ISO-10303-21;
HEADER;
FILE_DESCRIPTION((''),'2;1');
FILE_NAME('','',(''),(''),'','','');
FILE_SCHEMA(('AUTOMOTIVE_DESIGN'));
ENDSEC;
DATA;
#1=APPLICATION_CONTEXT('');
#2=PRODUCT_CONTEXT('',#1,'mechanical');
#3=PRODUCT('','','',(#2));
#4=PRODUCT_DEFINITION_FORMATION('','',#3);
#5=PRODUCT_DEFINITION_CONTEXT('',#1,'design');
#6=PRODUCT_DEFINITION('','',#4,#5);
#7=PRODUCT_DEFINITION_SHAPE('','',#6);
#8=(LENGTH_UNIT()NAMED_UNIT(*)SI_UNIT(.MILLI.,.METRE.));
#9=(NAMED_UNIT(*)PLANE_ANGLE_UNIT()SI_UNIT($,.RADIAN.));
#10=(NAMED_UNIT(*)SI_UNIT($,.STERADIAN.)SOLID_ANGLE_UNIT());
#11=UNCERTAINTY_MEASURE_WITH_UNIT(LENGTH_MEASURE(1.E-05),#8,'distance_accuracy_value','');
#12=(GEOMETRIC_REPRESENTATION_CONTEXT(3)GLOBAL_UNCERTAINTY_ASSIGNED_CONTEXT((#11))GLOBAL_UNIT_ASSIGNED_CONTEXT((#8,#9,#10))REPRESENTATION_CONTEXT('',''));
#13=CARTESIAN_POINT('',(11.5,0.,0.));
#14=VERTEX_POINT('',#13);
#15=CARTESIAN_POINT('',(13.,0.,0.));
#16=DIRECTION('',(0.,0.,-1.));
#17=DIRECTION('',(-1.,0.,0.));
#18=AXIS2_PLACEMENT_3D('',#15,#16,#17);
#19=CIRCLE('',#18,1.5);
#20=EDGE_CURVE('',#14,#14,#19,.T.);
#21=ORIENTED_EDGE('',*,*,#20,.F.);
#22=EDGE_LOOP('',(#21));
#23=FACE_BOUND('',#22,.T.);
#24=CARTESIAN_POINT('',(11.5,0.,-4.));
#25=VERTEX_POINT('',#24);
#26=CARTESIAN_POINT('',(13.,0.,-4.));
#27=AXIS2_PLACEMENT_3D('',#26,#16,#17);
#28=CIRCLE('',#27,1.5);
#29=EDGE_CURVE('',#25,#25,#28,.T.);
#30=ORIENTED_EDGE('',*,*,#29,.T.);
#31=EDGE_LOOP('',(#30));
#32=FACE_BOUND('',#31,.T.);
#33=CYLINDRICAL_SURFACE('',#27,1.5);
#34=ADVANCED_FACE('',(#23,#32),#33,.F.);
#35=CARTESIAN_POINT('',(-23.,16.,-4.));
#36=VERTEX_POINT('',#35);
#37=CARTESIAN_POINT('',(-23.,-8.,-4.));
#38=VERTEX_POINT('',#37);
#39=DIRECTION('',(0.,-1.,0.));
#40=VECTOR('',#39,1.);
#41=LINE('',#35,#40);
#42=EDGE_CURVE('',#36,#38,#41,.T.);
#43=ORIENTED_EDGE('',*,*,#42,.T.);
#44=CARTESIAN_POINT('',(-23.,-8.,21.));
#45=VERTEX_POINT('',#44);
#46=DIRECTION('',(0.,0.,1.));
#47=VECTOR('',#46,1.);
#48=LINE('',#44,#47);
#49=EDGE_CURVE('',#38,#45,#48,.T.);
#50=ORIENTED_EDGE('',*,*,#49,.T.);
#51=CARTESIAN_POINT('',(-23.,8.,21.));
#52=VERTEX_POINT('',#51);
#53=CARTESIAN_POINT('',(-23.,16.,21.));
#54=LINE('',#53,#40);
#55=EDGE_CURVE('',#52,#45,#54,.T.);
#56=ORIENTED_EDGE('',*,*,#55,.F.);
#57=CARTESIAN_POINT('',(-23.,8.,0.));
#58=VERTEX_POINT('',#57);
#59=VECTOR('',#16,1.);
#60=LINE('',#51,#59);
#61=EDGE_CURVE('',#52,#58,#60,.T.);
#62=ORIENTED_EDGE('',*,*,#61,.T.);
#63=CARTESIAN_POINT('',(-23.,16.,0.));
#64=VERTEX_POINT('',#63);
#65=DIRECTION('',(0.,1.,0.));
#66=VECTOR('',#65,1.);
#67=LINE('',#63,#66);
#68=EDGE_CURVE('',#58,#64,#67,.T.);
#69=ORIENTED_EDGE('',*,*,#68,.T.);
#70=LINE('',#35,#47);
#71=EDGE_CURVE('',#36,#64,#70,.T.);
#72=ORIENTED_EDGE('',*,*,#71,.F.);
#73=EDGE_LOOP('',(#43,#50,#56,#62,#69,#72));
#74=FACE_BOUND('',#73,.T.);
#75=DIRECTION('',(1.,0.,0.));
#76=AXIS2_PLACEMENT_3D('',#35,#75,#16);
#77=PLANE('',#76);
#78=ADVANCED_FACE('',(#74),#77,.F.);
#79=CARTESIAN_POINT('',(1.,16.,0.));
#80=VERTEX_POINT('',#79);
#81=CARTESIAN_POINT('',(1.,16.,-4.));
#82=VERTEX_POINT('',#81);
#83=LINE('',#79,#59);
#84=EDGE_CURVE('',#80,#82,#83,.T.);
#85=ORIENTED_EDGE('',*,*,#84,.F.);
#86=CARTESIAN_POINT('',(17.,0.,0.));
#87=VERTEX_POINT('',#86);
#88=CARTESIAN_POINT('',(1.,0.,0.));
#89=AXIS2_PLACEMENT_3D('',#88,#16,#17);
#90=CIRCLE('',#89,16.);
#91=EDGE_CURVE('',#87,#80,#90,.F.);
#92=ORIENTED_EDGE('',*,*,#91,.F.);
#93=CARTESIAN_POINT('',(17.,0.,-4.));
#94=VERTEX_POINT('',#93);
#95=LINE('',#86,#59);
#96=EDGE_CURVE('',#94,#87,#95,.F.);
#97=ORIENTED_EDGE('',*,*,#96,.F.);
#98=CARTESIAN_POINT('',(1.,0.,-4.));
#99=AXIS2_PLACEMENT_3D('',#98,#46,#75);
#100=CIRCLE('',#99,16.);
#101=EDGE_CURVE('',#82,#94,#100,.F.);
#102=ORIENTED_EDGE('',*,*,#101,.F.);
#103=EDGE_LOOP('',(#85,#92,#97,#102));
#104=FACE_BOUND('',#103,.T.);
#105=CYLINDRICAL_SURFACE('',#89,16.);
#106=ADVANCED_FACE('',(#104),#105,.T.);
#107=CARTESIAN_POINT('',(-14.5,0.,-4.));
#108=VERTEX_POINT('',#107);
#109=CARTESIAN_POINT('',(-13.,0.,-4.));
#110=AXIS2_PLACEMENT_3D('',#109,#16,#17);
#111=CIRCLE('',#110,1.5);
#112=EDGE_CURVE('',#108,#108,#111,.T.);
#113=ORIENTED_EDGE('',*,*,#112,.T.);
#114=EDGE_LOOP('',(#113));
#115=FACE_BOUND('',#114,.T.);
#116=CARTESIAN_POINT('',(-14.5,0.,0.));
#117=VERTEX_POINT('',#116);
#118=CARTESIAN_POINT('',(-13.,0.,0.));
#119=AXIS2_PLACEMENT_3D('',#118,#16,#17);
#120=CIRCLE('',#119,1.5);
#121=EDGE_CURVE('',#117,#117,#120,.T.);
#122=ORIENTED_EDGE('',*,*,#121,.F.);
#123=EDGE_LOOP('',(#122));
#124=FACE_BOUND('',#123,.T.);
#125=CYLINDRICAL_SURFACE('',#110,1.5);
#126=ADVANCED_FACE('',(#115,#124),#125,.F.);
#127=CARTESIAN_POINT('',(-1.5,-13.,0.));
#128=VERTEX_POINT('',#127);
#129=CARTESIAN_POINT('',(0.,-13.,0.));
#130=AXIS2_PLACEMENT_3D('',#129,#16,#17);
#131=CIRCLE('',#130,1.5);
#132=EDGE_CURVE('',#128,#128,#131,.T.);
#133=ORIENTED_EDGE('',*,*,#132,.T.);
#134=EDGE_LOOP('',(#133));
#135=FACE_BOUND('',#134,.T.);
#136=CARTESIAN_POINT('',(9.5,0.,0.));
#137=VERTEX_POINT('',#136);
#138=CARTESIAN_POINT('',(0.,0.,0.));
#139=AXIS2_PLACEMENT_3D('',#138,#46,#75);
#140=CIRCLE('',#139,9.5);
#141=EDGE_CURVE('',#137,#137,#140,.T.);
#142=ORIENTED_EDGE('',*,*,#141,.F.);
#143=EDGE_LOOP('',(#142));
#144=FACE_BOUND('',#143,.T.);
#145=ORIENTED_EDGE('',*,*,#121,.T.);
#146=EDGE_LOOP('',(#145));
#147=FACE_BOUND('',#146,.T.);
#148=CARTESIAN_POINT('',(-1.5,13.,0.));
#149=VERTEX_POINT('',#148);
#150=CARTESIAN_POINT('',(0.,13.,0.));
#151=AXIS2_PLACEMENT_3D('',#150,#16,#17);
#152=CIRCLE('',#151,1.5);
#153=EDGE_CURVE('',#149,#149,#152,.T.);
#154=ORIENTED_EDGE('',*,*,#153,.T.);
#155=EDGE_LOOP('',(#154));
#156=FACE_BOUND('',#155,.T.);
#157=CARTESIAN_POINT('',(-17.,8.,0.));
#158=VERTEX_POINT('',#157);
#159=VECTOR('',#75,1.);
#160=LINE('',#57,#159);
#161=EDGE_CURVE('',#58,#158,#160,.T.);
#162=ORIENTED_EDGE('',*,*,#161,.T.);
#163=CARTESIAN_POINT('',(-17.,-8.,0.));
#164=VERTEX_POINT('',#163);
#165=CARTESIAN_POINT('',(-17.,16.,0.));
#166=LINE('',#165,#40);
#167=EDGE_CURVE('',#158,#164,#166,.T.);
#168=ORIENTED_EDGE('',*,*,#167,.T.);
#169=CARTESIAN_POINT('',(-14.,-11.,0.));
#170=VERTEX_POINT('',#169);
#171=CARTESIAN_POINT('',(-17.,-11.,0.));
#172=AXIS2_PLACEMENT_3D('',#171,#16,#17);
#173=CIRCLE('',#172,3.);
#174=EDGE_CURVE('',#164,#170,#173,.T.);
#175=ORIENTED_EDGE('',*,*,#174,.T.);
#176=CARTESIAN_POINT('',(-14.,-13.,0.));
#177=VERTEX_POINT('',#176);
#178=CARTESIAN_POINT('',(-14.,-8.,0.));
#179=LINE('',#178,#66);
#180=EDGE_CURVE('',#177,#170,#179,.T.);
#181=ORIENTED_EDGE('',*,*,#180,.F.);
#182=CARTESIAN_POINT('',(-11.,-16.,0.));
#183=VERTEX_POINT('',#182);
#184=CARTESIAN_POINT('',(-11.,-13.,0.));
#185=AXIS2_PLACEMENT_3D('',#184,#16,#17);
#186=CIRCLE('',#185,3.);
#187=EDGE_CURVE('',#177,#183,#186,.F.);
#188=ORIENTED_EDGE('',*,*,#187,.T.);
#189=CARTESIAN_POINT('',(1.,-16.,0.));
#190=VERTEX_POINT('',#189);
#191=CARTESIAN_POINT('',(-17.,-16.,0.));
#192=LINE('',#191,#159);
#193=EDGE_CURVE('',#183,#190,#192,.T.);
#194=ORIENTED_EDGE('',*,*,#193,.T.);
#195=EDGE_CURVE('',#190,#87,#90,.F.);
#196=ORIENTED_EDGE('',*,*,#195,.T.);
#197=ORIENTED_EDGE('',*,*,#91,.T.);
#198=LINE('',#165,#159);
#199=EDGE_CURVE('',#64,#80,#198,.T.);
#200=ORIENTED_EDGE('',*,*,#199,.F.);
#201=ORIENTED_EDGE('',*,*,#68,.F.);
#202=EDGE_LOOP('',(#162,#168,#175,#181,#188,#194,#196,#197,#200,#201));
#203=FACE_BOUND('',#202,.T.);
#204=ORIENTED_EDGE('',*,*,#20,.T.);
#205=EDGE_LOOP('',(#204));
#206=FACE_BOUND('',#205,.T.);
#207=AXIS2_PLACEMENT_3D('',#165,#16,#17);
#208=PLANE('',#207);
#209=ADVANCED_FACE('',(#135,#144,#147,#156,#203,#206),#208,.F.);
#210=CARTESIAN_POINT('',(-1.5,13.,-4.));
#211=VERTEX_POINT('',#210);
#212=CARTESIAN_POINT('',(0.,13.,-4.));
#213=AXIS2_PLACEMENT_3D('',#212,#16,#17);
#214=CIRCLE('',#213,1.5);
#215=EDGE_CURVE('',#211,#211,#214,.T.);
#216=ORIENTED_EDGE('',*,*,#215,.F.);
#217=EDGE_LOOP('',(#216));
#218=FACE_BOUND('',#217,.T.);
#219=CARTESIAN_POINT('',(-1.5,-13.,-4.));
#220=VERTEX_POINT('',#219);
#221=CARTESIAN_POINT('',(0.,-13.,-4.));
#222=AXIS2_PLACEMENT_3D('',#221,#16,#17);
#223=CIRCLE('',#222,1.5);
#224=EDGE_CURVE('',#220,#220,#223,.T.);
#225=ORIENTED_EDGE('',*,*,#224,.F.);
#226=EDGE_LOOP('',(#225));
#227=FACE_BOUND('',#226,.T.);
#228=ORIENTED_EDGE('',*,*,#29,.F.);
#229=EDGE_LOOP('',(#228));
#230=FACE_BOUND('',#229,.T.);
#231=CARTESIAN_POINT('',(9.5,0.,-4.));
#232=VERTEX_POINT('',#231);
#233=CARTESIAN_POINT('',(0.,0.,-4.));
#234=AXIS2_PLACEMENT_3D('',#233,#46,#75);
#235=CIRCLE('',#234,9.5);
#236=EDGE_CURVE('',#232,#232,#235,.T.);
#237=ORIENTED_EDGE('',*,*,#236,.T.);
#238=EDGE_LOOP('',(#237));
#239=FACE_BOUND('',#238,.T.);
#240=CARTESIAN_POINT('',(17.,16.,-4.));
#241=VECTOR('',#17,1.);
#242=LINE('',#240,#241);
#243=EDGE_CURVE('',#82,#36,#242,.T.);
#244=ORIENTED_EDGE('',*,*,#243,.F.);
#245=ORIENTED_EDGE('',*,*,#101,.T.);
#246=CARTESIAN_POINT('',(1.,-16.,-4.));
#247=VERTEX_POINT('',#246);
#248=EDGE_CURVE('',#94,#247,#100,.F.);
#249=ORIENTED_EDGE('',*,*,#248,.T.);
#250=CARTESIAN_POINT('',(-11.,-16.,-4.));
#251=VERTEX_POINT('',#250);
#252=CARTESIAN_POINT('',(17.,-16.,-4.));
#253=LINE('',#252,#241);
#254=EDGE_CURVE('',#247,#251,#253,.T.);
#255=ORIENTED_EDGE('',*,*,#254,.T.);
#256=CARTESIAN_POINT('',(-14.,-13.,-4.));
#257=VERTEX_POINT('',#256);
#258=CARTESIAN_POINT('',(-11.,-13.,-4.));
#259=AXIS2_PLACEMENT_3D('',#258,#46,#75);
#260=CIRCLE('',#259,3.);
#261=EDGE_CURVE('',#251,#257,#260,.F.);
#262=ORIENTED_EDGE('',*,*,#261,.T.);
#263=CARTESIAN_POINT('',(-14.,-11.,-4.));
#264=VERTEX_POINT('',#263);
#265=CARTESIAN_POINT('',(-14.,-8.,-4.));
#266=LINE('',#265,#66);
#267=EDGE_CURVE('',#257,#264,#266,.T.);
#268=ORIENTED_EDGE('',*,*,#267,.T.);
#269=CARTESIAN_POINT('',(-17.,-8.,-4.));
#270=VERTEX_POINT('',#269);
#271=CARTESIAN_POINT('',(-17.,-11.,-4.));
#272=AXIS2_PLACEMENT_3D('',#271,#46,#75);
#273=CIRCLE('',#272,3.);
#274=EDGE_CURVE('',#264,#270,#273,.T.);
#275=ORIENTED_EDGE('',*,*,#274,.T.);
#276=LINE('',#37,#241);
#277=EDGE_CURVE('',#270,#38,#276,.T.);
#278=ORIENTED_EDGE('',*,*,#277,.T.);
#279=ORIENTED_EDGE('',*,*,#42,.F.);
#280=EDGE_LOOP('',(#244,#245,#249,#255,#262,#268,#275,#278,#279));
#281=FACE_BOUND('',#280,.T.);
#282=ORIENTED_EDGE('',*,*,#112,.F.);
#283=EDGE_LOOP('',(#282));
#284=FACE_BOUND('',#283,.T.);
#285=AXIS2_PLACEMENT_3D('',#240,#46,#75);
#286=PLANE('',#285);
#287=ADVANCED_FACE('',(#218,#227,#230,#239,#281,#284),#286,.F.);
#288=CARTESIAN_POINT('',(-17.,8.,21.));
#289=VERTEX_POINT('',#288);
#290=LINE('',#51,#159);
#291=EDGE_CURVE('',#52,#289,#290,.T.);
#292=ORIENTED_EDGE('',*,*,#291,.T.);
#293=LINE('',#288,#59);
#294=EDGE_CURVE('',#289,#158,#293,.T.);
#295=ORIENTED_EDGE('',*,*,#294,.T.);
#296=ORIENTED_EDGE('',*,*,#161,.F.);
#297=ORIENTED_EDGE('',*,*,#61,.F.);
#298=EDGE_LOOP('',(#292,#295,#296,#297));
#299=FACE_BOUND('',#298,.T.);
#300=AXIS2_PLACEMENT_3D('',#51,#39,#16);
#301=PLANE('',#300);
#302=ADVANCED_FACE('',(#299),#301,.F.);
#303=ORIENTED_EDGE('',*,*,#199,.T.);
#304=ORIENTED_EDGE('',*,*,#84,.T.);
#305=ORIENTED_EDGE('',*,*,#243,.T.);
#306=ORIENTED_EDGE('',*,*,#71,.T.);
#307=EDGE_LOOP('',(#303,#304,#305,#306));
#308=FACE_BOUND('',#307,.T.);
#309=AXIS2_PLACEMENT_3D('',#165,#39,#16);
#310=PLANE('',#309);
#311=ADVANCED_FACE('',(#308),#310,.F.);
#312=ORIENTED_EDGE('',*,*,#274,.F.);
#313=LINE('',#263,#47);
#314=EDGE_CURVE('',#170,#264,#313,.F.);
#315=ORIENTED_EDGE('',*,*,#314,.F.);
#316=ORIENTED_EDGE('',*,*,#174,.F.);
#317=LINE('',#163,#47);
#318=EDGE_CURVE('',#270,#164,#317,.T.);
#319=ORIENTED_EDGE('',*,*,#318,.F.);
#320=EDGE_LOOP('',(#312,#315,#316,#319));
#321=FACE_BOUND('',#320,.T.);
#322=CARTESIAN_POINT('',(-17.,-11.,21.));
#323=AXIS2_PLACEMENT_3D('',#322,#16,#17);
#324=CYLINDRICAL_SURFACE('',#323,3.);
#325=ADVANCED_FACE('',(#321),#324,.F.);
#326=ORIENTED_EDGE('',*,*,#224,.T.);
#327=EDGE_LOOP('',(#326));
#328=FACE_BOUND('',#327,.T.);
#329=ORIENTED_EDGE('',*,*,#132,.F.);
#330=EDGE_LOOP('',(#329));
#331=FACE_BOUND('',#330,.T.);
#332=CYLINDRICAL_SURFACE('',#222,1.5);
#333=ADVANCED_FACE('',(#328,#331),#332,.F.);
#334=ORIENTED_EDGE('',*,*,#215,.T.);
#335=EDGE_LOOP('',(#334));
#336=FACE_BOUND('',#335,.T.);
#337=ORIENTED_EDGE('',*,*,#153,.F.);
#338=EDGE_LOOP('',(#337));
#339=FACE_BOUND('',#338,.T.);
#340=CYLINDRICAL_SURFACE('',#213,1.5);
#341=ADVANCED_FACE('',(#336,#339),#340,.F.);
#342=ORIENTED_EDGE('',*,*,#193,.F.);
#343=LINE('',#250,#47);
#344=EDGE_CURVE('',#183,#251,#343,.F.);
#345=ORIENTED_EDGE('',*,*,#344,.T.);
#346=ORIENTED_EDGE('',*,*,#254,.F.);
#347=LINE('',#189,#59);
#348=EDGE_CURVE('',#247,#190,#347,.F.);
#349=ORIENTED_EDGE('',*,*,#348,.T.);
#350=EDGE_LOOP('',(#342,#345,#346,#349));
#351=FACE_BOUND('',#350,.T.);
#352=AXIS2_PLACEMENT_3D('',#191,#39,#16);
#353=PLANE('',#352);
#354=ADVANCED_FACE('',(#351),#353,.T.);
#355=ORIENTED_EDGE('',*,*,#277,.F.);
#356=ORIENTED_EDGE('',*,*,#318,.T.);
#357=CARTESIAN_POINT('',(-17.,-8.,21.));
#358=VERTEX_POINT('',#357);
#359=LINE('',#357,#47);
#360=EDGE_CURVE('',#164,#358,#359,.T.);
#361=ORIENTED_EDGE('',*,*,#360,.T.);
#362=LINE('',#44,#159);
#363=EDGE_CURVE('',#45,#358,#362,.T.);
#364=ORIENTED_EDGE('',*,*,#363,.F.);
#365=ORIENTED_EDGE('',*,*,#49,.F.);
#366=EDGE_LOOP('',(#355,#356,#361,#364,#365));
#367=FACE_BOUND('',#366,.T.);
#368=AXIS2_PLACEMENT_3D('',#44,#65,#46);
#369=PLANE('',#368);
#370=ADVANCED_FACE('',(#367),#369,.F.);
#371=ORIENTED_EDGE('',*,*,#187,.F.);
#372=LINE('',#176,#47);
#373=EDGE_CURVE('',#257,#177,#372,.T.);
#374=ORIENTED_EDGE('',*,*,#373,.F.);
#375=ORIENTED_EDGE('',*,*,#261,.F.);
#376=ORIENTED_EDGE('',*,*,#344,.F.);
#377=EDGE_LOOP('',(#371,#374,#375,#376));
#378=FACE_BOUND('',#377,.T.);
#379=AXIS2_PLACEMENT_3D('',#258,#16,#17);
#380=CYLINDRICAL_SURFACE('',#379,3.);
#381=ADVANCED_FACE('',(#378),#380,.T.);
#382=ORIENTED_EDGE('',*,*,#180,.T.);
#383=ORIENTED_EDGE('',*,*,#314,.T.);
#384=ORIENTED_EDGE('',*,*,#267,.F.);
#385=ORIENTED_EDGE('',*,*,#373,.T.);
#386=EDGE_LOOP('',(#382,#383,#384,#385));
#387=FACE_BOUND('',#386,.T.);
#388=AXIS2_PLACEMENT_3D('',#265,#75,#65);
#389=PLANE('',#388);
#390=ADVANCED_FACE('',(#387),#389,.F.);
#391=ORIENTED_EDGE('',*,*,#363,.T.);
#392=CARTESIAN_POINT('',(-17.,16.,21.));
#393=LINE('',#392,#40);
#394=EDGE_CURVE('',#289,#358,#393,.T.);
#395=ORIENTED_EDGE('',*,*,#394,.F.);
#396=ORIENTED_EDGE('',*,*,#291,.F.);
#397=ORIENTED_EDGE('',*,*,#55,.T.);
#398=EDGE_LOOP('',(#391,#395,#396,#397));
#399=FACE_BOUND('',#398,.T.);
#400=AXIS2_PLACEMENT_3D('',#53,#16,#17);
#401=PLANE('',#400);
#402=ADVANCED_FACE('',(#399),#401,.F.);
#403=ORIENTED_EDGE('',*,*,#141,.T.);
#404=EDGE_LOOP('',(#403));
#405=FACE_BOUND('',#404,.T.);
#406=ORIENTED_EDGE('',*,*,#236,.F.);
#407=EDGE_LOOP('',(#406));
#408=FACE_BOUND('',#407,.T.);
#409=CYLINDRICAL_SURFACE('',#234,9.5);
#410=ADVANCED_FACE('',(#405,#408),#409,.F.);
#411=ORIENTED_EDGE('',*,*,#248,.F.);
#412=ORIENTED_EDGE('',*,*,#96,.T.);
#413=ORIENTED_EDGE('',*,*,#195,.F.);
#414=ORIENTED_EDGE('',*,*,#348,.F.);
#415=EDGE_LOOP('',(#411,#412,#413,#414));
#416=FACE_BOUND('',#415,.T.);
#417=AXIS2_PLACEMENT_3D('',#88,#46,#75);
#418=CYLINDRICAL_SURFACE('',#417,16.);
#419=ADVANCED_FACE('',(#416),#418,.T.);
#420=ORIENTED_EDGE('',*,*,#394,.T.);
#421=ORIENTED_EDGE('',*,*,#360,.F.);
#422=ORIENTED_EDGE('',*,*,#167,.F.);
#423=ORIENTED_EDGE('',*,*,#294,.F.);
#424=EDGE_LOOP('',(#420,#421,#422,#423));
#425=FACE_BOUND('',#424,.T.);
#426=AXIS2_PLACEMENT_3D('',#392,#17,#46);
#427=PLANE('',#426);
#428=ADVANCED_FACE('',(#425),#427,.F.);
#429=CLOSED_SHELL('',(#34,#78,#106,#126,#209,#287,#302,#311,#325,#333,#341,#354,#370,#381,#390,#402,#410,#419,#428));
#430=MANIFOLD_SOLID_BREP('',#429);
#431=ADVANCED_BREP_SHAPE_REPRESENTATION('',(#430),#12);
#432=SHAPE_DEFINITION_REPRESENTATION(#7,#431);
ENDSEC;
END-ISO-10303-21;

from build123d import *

# Parameters (mm, degrees)
BOSS_EXTRUDE1_DEPTH      = 16
SKETCH2_W                = 21
SKETCH2_H                = 8
CUT_EXTRUDE1_DEPTH       = 44.0464865
SKETCH3_R                = 9.5
CUT_EXTRUDE2_DEPTH       = 36.0142828
FILLET1_R                = 16
F_3_0_3_DIAMETER_HOLE1_D = 3
SKETCH6_W                = 9
SKETCH6_H                = 8
CUT_EXTRUDE3_DEPTH       = 36.0142828
FILLET2_R                = 3


with BuildPart() as part:
    # Sketch1 → Boss-Extrude1 (new, symmetric)
    with BuildSketch(Plane(origin=(0, 0, 0), x_dir=(1, 0, 0), z_dir=(0, 1, 0))):
        Polygon((-17, 0), (17, 0), (17, 4), (-23, 4), (-23, -21), (-17, -21), align=None)
    extrude(amount=BOSS_EXTRUDE1_DEPTH, both=True)

    # Sketch2 → Cut-Extrude1 (cut, through all)
    with BuildSketch(Plane(origin=(-17, 0, 0), x_dir=(0, 0, -1), z_dir=(1, 0, 0))):
        with Locations((-10.5, 12)):
            Rectangle(SKETCH2_W, SKETCH2_H)
        with Locations((-10.5, -12)):
            Rectangle(SKETCH2_W, SKETCH2_H)
    extrude(amount=-CUT_EXTRUDE1_DEPTH, mode=Mode.SUBTRACT)

    # Sketch3 → Cut-Extrude2 (cut, through all)
    with BuildSketch(Plane.XY):
        Circle(SKETCH3_R)
    extrude(amount=-CUT_EXTRUDE2_DEPTH, mode=Mode.SUBTRACT)

    # Fillet1
    fillet1_edges = [part.edges().sort_by_distance(p)[0] for p in [
        (17, -16, -2),
        (17, 16, -2),
    ]]
    fillet(fillet1_edges, radius=FILLET1_R - 0.0001)  # a hair under: the kernel refuses the full size

    # Ø3.0 (3) Diameter Hole1 (through all)
    with Locations(Plane(origin=(0, 0, -4), x_dir=(-1, 0, 0), z_dir=(0, 0, -1))):
        with Locations((0, 13), (13, 0), (0, -13), (-13, 0)):
            Hole(F_3_0_3_DIAMETER_HOLE1_D / 2)

    # Sketch6 → Cut-Extrude3 (cut, through all)
    with BuildSketch(Plane.XY):
        with Locations((-18.5, -12)):
            Rectangle(SKETCH6_W, SKETCH6_H)
    extrude(amount=-CUT_EXTRUDE3_DEPTH, mode=Mode.SUBTRACT)

    # Fillet2
    fillet2_edges = [part.edges().sort_by_distance(p)[0] for p in [
        (-14, -16, -2),
        (-14, -8, -2),
    ]]
    fillet(fillet2_edges, radius=FILLET2_R)


solid = part.part
